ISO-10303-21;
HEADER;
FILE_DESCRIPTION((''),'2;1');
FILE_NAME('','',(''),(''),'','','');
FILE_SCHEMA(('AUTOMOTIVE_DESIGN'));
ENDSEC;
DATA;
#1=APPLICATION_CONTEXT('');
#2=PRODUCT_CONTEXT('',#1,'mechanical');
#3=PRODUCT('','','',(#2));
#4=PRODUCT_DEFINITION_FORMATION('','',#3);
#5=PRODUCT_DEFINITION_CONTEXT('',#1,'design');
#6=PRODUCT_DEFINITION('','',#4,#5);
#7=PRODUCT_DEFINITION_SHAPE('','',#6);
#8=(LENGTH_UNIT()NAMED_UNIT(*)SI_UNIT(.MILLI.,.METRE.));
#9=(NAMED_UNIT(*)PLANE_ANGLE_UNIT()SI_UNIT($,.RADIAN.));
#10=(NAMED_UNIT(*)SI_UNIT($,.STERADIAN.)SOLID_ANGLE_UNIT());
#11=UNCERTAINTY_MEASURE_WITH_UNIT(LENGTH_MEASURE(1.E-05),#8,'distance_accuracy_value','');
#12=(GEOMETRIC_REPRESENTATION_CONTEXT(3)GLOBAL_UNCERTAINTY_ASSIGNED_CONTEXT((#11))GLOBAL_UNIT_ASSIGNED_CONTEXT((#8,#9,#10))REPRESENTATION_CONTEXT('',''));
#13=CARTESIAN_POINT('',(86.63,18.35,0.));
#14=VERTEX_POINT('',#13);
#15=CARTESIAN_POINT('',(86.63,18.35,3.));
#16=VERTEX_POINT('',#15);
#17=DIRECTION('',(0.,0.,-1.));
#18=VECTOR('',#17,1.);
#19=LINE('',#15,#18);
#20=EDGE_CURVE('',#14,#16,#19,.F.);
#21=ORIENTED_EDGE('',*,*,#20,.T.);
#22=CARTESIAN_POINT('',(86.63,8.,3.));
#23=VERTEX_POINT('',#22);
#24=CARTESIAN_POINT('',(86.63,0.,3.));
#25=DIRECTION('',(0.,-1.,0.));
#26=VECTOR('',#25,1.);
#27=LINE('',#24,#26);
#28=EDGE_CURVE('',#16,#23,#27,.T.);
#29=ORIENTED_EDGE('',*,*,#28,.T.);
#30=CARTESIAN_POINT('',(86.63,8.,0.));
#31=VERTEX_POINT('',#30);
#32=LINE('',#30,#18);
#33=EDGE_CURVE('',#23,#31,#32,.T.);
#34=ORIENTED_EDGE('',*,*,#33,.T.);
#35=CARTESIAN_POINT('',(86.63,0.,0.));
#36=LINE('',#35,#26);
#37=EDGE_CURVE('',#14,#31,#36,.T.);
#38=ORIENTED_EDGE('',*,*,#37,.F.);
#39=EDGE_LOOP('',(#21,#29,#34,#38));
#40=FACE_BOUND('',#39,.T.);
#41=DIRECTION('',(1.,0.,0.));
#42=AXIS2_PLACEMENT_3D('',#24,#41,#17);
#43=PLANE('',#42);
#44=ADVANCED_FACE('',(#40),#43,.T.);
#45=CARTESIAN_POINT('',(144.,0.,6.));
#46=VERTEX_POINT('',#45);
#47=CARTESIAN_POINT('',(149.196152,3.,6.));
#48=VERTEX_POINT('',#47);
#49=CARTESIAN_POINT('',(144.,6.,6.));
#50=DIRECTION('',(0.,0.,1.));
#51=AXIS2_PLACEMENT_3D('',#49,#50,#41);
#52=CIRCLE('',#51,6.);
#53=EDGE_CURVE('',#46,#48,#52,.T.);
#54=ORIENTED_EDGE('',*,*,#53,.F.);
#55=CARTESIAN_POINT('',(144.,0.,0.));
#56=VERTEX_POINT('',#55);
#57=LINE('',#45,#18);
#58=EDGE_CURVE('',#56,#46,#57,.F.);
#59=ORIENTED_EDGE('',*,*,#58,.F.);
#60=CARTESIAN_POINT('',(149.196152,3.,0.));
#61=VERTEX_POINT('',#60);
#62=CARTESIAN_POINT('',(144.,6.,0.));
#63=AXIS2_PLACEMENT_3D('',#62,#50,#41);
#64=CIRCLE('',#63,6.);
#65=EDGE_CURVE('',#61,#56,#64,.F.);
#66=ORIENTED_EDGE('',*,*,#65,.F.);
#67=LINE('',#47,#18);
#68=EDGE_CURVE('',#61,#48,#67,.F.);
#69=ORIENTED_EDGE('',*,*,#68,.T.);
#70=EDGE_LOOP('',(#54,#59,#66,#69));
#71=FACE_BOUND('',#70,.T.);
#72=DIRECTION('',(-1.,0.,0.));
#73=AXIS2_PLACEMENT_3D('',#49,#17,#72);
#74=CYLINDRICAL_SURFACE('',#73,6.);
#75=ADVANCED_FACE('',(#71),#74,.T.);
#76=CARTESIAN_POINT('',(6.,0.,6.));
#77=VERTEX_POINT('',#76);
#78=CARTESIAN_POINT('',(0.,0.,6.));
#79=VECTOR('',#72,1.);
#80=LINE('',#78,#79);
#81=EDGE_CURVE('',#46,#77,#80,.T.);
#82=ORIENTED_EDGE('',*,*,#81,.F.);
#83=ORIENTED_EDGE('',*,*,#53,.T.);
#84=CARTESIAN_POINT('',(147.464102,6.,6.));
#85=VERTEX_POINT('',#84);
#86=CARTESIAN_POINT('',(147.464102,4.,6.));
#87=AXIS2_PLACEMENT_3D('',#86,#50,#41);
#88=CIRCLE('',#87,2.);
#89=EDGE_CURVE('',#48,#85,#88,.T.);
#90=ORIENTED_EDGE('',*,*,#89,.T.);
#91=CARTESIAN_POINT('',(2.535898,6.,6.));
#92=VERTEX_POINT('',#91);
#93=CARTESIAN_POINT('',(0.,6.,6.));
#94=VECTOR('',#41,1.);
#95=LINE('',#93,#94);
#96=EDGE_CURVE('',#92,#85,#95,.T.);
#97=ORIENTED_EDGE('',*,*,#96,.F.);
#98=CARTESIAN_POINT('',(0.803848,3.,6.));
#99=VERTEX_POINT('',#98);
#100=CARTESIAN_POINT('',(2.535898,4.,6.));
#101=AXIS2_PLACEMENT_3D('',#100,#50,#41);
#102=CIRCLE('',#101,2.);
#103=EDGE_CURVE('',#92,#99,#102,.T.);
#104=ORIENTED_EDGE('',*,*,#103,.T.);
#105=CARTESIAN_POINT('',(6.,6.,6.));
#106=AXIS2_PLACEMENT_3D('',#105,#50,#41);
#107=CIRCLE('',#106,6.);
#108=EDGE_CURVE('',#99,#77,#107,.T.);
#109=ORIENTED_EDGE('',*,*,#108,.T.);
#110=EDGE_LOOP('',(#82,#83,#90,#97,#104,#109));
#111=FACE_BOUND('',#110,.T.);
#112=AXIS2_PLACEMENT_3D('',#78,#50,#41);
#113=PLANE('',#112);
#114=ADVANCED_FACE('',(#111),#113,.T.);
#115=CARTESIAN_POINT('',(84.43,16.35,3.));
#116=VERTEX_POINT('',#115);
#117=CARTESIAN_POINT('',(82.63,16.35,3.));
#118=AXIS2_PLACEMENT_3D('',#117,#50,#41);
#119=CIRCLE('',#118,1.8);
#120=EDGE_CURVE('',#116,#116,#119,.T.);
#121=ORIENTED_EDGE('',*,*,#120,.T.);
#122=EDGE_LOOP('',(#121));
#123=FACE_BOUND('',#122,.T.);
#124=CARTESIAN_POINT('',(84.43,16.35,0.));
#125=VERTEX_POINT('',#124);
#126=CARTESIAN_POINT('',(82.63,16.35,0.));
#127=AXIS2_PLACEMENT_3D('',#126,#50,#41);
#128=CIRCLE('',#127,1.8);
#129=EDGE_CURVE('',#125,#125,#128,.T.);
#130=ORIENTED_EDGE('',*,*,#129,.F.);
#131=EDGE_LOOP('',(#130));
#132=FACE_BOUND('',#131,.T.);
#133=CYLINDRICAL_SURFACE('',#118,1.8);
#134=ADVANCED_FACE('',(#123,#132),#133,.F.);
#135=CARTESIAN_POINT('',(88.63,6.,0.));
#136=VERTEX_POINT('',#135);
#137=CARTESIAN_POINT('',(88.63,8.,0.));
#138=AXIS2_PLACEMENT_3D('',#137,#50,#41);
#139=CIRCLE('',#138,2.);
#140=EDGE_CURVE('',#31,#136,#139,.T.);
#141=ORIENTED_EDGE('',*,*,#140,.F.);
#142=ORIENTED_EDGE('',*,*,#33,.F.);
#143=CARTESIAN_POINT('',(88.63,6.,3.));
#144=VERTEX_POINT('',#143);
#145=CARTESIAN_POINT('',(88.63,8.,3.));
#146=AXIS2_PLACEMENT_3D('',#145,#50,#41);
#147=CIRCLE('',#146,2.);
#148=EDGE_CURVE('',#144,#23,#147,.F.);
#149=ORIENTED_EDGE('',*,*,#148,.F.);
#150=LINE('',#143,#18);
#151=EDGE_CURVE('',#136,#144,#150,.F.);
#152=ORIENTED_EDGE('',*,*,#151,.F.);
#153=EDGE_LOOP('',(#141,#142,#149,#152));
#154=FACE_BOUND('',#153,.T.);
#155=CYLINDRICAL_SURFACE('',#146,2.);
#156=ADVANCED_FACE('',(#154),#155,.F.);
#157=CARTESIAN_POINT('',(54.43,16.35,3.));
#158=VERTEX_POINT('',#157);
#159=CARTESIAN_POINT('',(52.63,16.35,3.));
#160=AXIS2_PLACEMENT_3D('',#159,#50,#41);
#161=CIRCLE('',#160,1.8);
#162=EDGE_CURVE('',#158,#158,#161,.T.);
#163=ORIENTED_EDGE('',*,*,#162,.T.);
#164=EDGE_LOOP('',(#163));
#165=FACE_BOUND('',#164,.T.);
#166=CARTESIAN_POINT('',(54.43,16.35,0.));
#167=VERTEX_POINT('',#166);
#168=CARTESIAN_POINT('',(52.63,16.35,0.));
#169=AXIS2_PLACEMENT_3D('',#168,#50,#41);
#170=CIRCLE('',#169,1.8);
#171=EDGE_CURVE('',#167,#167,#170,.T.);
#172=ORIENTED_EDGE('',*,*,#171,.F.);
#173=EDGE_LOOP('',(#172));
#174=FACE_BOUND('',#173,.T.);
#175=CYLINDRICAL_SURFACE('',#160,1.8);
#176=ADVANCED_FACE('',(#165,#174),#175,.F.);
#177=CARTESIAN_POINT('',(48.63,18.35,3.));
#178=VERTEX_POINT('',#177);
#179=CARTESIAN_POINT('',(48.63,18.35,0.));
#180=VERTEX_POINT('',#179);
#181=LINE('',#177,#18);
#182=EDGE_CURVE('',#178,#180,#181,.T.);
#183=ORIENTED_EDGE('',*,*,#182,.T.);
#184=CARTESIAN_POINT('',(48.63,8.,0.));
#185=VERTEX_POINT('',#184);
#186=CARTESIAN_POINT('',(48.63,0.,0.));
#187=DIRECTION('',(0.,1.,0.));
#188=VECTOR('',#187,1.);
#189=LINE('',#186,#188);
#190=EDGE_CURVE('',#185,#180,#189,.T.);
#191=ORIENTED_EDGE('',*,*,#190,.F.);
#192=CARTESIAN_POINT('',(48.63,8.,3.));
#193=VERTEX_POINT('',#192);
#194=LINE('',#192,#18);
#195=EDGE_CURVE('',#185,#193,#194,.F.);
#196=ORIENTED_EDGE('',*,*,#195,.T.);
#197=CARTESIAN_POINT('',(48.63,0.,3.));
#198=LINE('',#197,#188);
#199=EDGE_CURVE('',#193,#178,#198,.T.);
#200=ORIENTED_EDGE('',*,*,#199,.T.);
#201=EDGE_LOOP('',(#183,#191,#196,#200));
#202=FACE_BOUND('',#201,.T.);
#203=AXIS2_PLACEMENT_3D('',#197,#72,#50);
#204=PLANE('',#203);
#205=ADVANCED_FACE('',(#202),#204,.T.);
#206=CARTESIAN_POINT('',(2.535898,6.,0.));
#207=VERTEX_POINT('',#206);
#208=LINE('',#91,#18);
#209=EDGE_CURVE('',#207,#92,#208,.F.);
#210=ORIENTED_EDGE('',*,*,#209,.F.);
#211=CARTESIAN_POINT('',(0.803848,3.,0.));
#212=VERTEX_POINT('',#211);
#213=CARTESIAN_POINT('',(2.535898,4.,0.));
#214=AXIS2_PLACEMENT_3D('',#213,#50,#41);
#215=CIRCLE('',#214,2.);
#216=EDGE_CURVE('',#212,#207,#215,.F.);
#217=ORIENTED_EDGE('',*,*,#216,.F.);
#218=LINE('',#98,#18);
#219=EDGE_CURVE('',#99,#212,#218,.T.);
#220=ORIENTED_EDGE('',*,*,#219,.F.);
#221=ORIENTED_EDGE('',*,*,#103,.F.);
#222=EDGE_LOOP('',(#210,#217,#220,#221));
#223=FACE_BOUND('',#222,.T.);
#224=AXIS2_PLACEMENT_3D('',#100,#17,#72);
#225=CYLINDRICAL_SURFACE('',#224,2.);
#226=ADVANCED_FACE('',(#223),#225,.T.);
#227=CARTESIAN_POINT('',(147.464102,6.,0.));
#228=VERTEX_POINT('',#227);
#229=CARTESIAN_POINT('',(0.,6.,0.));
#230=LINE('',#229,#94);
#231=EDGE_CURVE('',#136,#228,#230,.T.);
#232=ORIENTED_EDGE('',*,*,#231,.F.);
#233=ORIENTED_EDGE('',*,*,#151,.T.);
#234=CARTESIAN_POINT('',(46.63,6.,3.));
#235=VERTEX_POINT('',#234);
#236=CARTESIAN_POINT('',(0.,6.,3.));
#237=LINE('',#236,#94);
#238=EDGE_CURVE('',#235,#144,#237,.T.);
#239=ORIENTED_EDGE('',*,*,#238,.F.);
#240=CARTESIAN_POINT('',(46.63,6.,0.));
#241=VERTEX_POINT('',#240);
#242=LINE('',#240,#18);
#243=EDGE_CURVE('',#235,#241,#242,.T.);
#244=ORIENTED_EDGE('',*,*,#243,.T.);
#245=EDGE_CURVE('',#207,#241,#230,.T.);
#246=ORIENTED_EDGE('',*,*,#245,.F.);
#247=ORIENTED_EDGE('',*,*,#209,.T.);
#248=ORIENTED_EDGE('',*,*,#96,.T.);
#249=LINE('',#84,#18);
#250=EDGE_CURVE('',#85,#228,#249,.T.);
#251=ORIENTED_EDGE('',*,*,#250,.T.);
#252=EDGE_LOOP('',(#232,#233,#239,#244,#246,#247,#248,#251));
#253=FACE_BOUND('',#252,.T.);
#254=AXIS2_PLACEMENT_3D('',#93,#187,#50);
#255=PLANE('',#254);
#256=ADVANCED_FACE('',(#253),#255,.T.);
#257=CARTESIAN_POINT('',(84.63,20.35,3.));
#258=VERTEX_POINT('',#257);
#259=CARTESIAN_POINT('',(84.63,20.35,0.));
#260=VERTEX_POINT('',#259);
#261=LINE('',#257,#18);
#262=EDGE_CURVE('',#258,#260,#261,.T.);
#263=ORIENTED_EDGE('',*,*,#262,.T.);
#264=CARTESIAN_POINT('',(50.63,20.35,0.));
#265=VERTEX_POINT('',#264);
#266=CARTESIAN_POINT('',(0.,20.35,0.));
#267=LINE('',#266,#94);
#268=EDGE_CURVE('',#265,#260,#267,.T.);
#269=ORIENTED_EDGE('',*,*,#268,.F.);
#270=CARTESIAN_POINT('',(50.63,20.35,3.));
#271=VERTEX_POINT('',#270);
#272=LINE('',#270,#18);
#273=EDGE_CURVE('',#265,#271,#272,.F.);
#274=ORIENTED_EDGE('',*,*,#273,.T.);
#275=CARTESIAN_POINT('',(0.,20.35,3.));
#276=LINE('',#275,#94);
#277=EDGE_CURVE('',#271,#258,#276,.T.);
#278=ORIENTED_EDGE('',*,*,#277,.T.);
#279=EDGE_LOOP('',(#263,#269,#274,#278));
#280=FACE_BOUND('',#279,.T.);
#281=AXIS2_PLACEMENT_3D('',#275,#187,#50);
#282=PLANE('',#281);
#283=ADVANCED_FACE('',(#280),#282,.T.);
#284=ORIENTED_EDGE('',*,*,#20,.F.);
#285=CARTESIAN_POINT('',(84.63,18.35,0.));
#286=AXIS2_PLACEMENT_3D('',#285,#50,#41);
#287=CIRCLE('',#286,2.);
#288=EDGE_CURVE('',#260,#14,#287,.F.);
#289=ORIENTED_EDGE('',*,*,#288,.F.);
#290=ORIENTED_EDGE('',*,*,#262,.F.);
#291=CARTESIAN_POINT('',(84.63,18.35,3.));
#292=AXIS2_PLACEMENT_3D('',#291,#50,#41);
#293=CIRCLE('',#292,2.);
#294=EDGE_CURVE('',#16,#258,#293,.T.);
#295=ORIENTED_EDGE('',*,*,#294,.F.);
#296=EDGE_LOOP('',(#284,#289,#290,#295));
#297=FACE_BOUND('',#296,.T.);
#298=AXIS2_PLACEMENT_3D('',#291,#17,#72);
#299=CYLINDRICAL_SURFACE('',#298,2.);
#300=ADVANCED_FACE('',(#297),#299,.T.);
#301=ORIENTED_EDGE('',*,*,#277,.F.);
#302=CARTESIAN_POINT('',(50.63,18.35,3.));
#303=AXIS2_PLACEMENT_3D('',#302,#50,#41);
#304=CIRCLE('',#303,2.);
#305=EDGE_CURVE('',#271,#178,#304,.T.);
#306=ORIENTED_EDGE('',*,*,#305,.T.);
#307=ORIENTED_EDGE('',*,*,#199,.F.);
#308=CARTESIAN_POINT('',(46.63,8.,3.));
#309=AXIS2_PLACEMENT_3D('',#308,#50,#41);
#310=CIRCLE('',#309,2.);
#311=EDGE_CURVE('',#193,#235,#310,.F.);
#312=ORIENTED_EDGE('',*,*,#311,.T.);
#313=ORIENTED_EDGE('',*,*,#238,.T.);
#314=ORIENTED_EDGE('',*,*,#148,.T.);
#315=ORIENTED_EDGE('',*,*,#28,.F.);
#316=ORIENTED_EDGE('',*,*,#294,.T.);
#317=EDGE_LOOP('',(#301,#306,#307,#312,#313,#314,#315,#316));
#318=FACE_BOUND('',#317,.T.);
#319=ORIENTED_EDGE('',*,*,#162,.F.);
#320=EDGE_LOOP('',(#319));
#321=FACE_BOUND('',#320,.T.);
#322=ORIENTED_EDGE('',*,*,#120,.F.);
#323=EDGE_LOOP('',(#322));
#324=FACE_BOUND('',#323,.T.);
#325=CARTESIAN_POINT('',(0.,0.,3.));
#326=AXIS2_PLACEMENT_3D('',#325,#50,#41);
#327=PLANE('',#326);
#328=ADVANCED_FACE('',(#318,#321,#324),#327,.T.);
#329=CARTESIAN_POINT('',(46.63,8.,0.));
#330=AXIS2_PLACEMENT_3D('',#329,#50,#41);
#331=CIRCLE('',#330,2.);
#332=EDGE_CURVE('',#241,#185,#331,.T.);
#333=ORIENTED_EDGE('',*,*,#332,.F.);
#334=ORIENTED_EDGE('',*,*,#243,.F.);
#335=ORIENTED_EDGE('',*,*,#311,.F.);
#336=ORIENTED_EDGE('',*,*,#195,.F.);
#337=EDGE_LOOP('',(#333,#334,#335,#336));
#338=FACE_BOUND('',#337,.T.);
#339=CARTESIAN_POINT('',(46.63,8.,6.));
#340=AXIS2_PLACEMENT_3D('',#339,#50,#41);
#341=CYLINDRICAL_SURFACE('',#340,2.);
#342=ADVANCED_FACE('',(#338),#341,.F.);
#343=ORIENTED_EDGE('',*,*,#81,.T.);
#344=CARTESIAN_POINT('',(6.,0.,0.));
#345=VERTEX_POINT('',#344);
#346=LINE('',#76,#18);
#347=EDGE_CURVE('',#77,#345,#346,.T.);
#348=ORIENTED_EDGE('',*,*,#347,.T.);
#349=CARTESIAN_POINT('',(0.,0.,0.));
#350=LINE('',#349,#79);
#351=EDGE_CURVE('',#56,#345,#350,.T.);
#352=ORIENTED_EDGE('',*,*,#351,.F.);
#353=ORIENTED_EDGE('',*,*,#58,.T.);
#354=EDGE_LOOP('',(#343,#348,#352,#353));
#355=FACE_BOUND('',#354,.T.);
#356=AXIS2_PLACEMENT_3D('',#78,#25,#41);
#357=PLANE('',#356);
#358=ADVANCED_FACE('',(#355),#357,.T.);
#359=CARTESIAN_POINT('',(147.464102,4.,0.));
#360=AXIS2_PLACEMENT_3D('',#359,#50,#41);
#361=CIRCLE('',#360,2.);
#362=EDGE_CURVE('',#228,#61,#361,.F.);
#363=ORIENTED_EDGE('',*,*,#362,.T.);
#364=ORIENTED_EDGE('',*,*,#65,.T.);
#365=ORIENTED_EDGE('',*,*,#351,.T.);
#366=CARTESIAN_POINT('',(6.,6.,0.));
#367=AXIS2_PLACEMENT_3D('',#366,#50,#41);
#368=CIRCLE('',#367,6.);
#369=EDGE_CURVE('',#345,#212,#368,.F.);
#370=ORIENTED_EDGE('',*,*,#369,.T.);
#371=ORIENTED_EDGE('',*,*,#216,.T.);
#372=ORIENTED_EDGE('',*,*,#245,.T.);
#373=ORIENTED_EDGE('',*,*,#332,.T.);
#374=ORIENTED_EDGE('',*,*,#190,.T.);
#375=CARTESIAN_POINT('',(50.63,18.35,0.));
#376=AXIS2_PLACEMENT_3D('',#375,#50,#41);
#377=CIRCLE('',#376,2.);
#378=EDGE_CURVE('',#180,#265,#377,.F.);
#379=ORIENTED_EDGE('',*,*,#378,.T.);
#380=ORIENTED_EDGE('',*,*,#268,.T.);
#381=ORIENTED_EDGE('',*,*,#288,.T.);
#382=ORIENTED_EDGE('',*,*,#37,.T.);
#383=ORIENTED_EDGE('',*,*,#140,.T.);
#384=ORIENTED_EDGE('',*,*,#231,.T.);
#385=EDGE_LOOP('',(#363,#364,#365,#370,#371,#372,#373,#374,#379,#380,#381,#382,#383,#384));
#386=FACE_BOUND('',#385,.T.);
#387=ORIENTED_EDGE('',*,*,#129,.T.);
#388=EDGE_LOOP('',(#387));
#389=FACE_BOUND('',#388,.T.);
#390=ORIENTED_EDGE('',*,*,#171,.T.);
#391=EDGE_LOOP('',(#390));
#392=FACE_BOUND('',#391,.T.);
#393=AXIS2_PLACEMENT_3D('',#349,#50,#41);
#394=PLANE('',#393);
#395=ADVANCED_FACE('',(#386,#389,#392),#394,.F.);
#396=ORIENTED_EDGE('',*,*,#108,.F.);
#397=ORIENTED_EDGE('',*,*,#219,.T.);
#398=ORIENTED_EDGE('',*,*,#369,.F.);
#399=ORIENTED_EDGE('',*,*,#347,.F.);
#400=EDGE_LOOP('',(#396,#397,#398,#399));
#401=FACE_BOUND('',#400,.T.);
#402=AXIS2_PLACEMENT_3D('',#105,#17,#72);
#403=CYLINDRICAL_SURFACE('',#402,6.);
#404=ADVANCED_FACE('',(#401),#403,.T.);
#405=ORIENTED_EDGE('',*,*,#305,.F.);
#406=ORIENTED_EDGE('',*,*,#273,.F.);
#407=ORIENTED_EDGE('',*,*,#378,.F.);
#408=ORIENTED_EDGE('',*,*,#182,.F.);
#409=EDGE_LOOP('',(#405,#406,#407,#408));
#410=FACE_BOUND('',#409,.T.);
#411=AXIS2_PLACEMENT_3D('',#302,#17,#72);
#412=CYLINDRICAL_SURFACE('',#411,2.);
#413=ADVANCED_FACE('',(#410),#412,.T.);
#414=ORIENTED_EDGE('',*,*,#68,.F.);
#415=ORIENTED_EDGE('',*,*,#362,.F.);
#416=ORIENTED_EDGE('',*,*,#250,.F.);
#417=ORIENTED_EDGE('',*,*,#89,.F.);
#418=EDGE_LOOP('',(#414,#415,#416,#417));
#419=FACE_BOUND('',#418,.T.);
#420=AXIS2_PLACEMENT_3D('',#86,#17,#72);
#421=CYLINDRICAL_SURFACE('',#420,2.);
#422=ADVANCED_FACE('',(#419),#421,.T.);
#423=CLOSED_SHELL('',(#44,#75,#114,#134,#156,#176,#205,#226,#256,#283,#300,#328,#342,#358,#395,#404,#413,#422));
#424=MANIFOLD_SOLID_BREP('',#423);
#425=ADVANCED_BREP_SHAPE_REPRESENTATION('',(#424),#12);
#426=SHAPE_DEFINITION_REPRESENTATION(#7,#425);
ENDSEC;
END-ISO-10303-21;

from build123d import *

# Parameters (mm, degrees)
SKETCH1_W            = 150
SKETCH1_H            = 6
BOSS_EXTRUDE1_DEPTH  = 6
SKETCH1_3_W          = 38
SKETCH1_3_H          = 14.35
BOSS_EXTRUDE2_DEPTH  = 3
M3_CLEARANCE_HOLE1_D = 3.6
FILLET1_R            = 6
FILLET2_R            = 2


with BuildPart() as part:
    # Sketch1 → Boss-Extrude1 (new body)
    with BuildSketch(Plane.XY):
        with Locations((75, 3)):
            Rectangle(SKETCH1_W, SKETCH1_H)
    extrude(amount=BOSS_EXTRUDE1_DEPTH)

    # Sketch1<3> → Boss-Extrude2 (add)
    with BuildSketch(Plane.XY):
        with Locations((67.63, 13.175)):
            Rectangle(SKETCH1_3_W, SKETCH1_3_H)
    extrude(amount=BOSS_EXTRUDE2_DEPTH)

    # M3 Clearance Hole1 (through all)
    with Locations(Plane.XY.offset(3)):
        with Locations((52.63, 16.35), (82.63, 16.35)):
            Hole(M3_CLEARANCE_HOLE1_D / 2)

    # Fillet1
    fillet1_edges = [part.edges().sort_by_distance(p)[0] for p in [
        (150, 0, 3),
        (0, 0, 3),
    ]]
    fillet(fillet1_edges, radius=FILLET1_R - 0.0001)  # a hair under: the kernel refuses the full size

    # Fillet2
    fillet2_edges = [part.edges().sort_by_distance(p)[0] for p in [
        (86.63, 6, 1.5),
        (86.63, 20.35, 1.5),
        (48.63, 20.35, 1.5),
        (48.63, 6, 1.5),
        (0, 6, 3),
        (150, 6, 3),
    ]]
    fillet(fillet2_edges, radius=FILLET2_R)


solid = part.part
